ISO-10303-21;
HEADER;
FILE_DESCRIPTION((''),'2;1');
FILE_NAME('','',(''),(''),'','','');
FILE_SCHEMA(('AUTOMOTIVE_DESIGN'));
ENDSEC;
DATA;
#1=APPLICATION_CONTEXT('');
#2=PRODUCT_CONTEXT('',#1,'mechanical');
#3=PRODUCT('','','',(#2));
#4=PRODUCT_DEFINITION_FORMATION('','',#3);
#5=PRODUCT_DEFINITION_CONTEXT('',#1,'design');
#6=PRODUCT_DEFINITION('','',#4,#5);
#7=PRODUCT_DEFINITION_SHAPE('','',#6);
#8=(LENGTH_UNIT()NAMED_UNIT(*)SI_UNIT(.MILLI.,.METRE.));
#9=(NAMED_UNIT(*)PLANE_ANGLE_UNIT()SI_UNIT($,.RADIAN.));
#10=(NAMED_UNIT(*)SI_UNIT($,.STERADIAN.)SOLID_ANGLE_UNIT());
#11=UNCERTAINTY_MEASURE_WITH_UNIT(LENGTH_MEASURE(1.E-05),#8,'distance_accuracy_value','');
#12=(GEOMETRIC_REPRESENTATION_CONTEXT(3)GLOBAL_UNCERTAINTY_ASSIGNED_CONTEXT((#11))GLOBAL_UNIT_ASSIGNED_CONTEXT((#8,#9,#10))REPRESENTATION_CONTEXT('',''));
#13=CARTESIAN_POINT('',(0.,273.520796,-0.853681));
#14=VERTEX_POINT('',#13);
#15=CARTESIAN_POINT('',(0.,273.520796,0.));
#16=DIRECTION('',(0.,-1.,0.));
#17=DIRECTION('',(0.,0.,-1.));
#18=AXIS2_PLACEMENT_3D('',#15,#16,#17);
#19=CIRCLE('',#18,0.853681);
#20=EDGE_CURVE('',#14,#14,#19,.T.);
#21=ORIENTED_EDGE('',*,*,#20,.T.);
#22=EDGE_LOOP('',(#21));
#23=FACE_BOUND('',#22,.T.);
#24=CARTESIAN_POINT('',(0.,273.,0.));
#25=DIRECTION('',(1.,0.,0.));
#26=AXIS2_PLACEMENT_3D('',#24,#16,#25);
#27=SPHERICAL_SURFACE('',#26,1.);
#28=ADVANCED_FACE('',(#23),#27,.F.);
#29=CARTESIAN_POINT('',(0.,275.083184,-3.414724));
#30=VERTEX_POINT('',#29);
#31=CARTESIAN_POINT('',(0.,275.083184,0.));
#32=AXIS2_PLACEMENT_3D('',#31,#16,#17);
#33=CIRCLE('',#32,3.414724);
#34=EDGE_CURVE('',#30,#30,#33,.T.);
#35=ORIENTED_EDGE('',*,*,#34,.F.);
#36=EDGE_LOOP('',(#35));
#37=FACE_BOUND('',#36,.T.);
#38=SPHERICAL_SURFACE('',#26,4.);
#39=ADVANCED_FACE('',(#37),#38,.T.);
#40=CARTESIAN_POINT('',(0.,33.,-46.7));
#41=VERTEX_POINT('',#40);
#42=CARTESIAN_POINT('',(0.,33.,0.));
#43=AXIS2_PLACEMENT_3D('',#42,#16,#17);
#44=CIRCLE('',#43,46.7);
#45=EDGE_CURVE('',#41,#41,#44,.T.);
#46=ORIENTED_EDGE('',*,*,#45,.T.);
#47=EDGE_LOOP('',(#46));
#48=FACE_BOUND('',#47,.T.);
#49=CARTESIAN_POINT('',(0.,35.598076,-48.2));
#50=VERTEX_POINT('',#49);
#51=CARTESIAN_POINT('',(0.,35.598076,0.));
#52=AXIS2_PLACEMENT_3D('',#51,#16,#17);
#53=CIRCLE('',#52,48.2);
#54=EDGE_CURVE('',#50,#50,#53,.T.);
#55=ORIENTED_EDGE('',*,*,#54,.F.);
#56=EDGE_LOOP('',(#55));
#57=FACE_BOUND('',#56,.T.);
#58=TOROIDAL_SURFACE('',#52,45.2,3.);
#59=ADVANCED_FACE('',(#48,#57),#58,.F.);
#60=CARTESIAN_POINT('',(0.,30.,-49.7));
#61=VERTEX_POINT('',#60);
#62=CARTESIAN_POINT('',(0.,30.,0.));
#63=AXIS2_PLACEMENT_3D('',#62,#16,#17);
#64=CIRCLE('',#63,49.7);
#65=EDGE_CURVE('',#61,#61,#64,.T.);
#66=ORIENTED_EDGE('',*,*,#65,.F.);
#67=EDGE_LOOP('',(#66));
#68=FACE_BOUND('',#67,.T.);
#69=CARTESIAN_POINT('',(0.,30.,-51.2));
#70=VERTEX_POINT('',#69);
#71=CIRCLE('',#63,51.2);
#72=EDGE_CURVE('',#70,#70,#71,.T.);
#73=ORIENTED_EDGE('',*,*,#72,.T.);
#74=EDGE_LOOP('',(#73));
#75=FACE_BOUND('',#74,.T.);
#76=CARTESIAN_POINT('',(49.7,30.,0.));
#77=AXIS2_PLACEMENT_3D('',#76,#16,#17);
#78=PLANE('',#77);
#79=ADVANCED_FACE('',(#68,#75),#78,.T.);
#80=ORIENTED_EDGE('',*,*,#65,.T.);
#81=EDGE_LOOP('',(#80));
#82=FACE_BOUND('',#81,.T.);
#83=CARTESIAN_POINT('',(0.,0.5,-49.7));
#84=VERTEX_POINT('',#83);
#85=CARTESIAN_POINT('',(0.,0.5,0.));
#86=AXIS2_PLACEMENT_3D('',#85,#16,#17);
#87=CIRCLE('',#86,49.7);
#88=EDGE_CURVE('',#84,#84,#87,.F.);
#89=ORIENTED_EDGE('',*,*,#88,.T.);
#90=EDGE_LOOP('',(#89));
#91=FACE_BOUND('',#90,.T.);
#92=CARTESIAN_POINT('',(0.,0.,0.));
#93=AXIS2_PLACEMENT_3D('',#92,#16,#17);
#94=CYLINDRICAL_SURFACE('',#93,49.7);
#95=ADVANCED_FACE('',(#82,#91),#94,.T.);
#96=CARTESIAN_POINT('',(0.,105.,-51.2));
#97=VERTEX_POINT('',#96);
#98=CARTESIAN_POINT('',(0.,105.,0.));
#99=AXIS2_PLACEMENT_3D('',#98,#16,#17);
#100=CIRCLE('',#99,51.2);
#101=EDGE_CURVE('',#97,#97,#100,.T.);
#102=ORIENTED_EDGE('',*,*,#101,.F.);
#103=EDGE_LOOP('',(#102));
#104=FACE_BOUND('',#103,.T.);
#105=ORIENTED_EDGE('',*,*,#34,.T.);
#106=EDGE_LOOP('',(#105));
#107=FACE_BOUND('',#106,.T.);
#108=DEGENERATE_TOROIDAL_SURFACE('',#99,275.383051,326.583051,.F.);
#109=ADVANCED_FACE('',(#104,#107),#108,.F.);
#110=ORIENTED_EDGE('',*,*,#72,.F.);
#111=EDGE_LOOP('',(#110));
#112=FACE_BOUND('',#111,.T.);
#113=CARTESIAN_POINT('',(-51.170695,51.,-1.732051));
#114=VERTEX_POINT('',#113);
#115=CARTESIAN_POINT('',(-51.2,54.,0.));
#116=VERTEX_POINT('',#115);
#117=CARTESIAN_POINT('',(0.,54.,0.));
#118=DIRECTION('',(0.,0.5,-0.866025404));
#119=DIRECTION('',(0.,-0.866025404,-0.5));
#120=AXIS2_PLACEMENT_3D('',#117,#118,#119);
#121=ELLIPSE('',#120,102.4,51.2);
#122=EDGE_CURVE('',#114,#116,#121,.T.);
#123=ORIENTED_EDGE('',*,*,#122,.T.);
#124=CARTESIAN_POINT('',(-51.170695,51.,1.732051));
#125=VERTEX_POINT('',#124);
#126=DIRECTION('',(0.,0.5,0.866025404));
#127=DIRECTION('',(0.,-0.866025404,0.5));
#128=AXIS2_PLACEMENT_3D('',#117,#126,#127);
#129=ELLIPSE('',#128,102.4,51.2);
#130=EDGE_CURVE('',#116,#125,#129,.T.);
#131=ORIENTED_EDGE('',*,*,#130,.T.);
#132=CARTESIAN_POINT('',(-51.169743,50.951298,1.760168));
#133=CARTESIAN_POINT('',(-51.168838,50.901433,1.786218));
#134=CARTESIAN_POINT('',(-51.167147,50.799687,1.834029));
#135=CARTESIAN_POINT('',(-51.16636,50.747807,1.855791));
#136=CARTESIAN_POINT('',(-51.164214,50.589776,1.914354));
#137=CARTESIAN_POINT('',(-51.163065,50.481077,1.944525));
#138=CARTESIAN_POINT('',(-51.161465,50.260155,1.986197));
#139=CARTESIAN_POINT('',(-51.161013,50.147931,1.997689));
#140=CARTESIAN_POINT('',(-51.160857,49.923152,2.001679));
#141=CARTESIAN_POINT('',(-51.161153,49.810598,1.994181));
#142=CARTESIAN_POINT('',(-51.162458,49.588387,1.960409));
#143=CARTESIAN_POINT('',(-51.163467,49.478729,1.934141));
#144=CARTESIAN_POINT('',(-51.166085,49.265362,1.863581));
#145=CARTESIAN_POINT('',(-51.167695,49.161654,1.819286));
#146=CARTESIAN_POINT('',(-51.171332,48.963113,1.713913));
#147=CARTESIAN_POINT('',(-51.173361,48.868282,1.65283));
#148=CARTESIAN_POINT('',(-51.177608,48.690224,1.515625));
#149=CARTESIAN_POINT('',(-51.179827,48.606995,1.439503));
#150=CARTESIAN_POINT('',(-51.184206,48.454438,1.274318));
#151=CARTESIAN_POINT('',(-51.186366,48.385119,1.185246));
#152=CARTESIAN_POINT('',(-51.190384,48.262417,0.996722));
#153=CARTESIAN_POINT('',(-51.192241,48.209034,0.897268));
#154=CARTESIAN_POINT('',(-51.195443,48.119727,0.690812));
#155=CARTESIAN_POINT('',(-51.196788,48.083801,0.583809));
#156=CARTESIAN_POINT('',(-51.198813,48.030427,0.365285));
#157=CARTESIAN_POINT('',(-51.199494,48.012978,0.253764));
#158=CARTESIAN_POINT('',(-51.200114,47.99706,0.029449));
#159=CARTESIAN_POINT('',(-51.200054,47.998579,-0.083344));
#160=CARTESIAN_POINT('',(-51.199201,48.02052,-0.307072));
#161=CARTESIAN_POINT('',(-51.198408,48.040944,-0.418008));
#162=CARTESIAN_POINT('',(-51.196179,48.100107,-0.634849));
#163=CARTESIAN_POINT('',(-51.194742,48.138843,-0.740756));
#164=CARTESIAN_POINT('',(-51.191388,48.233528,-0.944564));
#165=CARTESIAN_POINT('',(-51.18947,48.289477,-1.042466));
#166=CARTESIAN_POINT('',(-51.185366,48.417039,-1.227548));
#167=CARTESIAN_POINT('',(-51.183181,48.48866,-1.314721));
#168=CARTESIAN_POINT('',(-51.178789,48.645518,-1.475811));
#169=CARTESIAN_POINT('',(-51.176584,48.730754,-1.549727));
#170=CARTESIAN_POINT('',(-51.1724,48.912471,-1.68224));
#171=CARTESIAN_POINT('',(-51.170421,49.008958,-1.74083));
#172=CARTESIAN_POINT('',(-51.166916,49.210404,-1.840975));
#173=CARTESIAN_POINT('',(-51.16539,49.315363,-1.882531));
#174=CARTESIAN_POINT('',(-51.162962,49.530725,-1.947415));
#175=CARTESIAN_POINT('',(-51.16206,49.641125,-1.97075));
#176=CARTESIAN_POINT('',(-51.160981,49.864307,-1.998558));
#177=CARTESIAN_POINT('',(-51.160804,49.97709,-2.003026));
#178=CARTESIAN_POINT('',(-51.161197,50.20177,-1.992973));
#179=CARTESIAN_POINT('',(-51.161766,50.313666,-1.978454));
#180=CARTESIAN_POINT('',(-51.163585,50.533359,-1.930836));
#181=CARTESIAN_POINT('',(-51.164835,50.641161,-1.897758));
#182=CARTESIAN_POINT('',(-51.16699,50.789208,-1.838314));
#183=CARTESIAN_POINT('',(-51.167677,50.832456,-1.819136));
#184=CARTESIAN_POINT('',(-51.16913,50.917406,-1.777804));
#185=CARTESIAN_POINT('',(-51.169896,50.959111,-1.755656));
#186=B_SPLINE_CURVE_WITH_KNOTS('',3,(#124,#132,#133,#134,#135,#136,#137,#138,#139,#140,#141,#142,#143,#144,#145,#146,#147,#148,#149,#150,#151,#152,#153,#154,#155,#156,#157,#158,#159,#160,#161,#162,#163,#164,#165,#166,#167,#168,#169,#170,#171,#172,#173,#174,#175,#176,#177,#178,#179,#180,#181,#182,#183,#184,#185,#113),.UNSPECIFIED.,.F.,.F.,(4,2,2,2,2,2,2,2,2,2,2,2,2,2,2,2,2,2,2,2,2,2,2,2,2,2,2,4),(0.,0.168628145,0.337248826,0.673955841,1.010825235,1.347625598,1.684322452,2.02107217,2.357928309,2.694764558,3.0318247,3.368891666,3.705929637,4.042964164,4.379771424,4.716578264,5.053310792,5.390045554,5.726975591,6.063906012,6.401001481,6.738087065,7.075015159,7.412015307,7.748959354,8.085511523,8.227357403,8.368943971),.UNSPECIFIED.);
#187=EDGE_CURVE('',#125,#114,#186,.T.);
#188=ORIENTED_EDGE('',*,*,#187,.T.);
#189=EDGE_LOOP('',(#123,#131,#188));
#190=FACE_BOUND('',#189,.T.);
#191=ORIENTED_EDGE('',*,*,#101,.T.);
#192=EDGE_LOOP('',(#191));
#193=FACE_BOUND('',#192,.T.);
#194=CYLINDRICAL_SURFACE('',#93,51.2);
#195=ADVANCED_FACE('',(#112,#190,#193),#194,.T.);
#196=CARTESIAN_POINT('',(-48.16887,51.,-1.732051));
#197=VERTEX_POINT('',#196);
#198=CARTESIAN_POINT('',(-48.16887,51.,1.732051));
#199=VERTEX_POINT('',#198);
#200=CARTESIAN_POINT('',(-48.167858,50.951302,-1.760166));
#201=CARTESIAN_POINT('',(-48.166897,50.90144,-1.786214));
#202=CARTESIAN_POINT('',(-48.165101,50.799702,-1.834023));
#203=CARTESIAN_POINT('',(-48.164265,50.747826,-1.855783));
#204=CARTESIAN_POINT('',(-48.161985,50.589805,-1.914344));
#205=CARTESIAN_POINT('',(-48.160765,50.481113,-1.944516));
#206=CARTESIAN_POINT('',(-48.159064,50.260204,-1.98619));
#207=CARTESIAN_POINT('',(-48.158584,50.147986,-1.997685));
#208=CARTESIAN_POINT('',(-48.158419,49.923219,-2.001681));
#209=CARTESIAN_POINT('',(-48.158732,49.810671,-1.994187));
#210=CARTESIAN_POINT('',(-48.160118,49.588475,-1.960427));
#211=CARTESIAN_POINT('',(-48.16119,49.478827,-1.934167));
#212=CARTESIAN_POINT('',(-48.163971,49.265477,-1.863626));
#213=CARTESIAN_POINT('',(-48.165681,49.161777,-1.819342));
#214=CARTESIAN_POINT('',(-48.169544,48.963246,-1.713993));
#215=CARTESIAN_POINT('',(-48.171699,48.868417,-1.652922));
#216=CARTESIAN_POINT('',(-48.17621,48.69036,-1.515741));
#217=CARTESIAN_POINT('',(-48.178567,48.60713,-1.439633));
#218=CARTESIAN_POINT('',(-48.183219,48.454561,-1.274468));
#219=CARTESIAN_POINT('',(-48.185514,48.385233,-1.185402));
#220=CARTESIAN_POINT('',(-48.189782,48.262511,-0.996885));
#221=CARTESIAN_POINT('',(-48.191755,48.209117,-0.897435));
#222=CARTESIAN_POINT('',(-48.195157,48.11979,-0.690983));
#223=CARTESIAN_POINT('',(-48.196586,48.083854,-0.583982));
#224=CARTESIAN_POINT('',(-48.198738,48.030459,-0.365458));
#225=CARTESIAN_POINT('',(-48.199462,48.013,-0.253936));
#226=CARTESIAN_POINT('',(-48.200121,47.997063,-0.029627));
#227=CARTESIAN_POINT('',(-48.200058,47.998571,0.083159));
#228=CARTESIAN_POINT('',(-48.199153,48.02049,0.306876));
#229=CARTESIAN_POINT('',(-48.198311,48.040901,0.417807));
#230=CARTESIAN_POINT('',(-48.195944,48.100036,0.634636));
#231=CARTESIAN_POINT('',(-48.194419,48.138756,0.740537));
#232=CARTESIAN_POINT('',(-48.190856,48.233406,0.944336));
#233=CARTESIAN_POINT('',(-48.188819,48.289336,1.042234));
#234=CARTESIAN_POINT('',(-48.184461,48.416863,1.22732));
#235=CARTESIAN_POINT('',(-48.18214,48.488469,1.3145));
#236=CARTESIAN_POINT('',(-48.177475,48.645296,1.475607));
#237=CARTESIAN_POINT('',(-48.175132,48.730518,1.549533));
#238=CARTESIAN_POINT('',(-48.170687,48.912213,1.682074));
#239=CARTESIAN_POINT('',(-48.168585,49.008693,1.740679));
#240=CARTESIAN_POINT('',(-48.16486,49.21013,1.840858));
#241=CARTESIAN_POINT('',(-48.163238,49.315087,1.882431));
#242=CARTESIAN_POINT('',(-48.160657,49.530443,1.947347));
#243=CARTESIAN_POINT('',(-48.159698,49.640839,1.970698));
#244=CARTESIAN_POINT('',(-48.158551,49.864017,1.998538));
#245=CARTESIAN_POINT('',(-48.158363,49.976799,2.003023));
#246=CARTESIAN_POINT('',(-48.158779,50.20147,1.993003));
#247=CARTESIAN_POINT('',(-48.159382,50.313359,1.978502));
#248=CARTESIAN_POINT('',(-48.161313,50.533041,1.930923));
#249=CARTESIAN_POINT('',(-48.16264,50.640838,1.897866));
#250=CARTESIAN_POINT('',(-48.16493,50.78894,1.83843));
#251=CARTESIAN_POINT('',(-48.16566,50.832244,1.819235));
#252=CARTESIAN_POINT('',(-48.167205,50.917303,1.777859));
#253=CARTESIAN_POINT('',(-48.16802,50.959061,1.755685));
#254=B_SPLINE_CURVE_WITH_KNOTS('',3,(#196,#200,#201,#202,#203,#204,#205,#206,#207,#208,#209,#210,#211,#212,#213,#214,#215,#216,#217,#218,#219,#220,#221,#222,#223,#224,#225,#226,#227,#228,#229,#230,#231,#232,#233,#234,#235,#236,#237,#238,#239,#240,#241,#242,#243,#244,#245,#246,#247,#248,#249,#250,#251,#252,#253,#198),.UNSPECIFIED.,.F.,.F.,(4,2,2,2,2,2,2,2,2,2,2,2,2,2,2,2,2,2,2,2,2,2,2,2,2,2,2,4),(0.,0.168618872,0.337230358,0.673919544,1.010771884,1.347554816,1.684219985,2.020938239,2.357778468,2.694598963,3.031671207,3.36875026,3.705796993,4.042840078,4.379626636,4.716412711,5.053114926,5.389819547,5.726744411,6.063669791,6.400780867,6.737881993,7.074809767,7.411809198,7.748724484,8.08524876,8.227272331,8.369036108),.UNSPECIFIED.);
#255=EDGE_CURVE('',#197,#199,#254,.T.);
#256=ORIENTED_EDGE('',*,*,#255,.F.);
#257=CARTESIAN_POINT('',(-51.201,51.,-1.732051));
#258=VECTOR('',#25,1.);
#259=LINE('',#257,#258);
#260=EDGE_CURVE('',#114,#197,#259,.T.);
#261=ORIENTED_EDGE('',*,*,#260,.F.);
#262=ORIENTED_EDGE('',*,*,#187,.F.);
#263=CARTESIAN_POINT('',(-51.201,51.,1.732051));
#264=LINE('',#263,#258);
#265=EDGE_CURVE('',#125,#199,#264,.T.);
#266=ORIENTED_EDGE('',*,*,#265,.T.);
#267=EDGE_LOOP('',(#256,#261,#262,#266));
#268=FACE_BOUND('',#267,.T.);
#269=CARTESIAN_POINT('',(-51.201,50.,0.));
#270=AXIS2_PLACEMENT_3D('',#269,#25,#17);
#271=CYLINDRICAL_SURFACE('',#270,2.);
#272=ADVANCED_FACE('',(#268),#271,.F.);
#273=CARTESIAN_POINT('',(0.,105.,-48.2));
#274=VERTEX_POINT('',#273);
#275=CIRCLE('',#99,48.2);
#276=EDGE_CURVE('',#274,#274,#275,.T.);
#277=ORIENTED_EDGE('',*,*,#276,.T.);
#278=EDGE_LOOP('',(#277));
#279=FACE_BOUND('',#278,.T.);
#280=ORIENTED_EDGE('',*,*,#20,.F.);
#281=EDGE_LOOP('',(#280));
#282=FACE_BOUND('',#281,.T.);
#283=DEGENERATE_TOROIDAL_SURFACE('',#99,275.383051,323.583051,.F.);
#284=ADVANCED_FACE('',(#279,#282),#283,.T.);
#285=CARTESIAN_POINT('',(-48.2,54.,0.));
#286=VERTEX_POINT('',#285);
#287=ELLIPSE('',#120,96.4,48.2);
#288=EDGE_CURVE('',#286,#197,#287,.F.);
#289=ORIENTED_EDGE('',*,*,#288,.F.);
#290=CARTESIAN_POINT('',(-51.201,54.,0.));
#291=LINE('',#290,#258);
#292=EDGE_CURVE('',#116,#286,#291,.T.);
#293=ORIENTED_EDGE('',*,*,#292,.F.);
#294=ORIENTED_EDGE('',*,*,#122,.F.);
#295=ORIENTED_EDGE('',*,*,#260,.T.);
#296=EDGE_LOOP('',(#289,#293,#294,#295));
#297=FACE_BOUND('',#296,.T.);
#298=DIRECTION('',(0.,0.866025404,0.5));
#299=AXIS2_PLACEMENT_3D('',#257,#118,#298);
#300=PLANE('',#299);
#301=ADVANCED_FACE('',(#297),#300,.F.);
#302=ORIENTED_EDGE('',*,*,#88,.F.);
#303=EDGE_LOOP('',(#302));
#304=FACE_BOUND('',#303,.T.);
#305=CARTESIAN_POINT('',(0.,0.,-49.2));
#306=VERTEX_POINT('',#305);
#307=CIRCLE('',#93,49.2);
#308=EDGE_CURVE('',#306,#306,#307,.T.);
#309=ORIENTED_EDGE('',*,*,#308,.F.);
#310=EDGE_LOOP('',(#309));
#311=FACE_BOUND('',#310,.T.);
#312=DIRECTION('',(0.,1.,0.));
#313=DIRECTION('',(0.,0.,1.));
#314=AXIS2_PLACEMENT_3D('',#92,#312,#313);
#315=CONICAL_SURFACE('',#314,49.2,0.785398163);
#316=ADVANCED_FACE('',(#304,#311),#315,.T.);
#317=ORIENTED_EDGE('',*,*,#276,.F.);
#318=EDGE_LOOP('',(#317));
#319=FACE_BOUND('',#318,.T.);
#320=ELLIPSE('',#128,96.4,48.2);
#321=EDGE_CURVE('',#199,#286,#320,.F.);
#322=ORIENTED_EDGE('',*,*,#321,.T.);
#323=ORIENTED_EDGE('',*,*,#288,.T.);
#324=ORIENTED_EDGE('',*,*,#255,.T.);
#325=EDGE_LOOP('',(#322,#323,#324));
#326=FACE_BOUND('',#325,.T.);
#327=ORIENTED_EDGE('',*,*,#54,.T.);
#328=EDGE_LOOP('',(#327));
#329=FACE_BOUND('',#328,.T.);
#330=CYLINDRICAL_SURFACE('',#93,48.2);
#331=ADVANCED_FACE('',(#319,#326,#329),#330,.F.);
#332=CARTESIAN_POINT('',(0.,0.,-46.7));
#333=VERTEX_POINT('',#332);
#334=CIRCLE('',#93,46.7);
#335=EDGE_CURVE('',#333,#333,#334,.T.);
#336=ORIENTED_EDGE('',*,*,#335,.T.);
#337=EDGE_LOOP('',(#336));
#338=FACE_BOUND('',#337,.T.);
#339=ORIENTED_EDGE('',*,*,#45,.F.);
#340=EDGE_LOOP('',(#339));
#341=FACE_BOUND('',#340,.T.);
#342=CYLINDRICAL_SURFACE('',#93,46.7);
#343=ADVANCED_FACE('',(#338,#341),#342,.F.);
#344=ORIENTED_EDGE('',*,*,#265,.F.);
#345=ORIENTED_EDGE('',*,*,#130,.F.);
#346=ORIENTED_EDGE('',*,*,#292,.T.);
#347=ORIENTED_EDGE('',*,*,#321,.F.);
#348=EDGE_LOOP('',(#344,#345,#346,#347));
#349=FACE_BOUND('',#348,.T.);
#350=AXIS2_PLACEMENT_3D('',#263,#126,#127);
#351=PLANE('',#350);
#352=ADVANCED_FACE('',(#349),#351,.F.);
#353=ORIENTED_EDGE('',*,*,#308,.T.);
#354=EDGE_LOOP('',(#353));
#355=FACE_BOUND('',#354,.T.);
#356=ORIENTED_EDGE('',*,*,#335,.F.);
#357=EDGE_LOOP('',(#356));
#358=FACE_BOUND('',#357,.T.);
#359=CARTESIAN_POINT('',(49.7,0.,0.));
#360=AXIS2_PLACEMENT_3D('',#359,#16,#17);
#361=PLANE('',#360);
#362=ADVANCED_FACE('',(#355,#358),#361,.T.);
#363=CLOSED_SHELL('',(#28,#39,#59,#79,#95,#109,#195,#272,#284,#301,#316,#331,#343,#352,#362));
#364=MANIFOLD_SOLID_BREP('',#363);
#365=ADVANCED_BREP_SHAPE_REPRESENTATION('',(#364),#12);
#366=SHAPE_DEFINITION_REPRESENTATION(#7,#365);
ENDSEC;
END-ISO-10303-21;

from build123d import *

# Parameters (mm, degrees)
FILLET_751_R                = 3
CHAMFER_848_SIZE            = 0.5
CUT_EXTRUDE_1153_REACH      = 288.307
CUT_EXTRUDE_1153_END_RADIUS = 51.2


# Read off the part's stored shape, not the designer's step: Оболочка1
with BuildPart() as part:
    # Эскиз1 → Revolve 638 (revolve)
    with BuildSketch(Plane.XY, mode=Mode.PRIVATE) as revolve_638_sk:
        with BuildLine():
            Line((49.7, 0), (30.5, 0))
            Line((30.5, 0), (30.5, 155))
            Line((30.5, 155), (26.5, 167))
            Line((26.5, 167), (0, 167))
            Line((0, 167), (0, 277))
            ThreePointArc((0, 277), (1.957966055, 276.488032243), (3.414724365, 275.083184464))
            ThreePointArc((3.414724365, 275.083184464), (39.026806742, 193.334198085), (51.2, 105))
            Line((51.2, 105), (51.2, 30))
            Line((51.2, 30), (49.7, 30))
            Line((49.7, 30), (49.7, 0))
        make_face()
    revolve(revolve_638_sk.sketch.rotate(Axis((0, 0, 0), (0, 1, 0)), 90), axis=Axis((0, 0, 0), (0, 1, 0)))

    # Оболочка1 outline → Оболочка1 (revolve, cut)
    with BuildSketch(Plane.XY):
        with BuildLine():
            ThreePointArc((48.2, 105), (36.138629997, 192.522757951), (0.853681091, 273.520796115))
            ThreePointArc((0.853681091, 273.520796115), (0.489491514, 273.872008061), (0, 274))
            Line((0, 274), (0, 167))
            Line((0, 167), (26.5, 167))
            Line((26.5, 167), (30.5, 155))
            Line((30.5, 155), (30.5, 0))
            Line((30.5, 0), (46.7, 0))
            Line((46.7, 0), (46.7, 33))
            Line((46.7, 33), (48.2, 33))
            Line((48.2, 33), (48.2, 105))
        make_face()
    revolve(axis=Axis((0, 0, 0), (0, 1, 0)), mode=Mode.SUBTRACT)

    # Fillet 751
    # the kernel refuses this fillet: 3 mm, written as the material it adds along each edge
    with BuildSketch(Plane(origin=(0, 33, 0), x_dir=(1, 0, 0), z_dir=(0, 0, 1))) as fillet_751_piece_1:
        with BuildLine():
            CenterArc((45.2, 2.598076211), FILLET_751_R, 300, 60)
            Line((48.2, 2.598076211), (48.26, 2.598076211))
            Line((48.26, 2.598076211), (48.26, 0))
            Line((48.26, 0), (48.2, -0.06))
            ThreePointArc((48.2, -0.06), (47.45, -0.06), (46.73, -0.051961524))
            Line((46.73, -0.051961524), (46.7, 0))
        make_face()
    revolve(axis=Axis((0, 33, 0), (0, 1, 0)))

    # Chamfer 848
    chamfer_848_edges = [part.edges().sort_by_distance(p)[0] for p in [
        (0, 0, 49.7),
    ]]
    chamfer(chamfer_848_edges, length=CHAMFER_848_SIZE)

    # Cut-Extrude 1153: up to this cylinder (the profile starts inside it)
    cut_extrude_1153_end = Plane(origin=(0, 50.452653, 0), z_dir=(0, -1, 0)) * Cylinder(CUT_EXTRUDE_1153_END_RADIUS, 680.014, mode=Mode.PRIVATE)
    # Эскиз4 → Cut-Extrude 1153 (cut, up to the surface)
    with BuildSketch(Plane(origin=(0, 0, 0), x_dir=(0, 0, -1), z_dir=(1, 0, 0)), mode=Mode.PRIVATE) as cut_extrude_1153_sk1:
        with BuildLine():
            Line((-1.732050808, 51), (0, 54))
            Line((0, 54), (1.732050808, 51))
            ThreePointArc((1.732050808, 51), (0, 48), (-1.732050808, 51))
        make_face()
    cut_extrude_1153_tool1 = extrude(cut_extrude_1153_sk1.sketch, amount=-CUT_EXTRUDE_1153_REACH, mode=Mode.PRIVATE) & cut_extrude_1153_end
    add(cut_extrude_1153_tool1.solids().sort_by_distance((0, 50.452653, 0))[0], mode=Mode.SUBTRACT)


solid = part.part
